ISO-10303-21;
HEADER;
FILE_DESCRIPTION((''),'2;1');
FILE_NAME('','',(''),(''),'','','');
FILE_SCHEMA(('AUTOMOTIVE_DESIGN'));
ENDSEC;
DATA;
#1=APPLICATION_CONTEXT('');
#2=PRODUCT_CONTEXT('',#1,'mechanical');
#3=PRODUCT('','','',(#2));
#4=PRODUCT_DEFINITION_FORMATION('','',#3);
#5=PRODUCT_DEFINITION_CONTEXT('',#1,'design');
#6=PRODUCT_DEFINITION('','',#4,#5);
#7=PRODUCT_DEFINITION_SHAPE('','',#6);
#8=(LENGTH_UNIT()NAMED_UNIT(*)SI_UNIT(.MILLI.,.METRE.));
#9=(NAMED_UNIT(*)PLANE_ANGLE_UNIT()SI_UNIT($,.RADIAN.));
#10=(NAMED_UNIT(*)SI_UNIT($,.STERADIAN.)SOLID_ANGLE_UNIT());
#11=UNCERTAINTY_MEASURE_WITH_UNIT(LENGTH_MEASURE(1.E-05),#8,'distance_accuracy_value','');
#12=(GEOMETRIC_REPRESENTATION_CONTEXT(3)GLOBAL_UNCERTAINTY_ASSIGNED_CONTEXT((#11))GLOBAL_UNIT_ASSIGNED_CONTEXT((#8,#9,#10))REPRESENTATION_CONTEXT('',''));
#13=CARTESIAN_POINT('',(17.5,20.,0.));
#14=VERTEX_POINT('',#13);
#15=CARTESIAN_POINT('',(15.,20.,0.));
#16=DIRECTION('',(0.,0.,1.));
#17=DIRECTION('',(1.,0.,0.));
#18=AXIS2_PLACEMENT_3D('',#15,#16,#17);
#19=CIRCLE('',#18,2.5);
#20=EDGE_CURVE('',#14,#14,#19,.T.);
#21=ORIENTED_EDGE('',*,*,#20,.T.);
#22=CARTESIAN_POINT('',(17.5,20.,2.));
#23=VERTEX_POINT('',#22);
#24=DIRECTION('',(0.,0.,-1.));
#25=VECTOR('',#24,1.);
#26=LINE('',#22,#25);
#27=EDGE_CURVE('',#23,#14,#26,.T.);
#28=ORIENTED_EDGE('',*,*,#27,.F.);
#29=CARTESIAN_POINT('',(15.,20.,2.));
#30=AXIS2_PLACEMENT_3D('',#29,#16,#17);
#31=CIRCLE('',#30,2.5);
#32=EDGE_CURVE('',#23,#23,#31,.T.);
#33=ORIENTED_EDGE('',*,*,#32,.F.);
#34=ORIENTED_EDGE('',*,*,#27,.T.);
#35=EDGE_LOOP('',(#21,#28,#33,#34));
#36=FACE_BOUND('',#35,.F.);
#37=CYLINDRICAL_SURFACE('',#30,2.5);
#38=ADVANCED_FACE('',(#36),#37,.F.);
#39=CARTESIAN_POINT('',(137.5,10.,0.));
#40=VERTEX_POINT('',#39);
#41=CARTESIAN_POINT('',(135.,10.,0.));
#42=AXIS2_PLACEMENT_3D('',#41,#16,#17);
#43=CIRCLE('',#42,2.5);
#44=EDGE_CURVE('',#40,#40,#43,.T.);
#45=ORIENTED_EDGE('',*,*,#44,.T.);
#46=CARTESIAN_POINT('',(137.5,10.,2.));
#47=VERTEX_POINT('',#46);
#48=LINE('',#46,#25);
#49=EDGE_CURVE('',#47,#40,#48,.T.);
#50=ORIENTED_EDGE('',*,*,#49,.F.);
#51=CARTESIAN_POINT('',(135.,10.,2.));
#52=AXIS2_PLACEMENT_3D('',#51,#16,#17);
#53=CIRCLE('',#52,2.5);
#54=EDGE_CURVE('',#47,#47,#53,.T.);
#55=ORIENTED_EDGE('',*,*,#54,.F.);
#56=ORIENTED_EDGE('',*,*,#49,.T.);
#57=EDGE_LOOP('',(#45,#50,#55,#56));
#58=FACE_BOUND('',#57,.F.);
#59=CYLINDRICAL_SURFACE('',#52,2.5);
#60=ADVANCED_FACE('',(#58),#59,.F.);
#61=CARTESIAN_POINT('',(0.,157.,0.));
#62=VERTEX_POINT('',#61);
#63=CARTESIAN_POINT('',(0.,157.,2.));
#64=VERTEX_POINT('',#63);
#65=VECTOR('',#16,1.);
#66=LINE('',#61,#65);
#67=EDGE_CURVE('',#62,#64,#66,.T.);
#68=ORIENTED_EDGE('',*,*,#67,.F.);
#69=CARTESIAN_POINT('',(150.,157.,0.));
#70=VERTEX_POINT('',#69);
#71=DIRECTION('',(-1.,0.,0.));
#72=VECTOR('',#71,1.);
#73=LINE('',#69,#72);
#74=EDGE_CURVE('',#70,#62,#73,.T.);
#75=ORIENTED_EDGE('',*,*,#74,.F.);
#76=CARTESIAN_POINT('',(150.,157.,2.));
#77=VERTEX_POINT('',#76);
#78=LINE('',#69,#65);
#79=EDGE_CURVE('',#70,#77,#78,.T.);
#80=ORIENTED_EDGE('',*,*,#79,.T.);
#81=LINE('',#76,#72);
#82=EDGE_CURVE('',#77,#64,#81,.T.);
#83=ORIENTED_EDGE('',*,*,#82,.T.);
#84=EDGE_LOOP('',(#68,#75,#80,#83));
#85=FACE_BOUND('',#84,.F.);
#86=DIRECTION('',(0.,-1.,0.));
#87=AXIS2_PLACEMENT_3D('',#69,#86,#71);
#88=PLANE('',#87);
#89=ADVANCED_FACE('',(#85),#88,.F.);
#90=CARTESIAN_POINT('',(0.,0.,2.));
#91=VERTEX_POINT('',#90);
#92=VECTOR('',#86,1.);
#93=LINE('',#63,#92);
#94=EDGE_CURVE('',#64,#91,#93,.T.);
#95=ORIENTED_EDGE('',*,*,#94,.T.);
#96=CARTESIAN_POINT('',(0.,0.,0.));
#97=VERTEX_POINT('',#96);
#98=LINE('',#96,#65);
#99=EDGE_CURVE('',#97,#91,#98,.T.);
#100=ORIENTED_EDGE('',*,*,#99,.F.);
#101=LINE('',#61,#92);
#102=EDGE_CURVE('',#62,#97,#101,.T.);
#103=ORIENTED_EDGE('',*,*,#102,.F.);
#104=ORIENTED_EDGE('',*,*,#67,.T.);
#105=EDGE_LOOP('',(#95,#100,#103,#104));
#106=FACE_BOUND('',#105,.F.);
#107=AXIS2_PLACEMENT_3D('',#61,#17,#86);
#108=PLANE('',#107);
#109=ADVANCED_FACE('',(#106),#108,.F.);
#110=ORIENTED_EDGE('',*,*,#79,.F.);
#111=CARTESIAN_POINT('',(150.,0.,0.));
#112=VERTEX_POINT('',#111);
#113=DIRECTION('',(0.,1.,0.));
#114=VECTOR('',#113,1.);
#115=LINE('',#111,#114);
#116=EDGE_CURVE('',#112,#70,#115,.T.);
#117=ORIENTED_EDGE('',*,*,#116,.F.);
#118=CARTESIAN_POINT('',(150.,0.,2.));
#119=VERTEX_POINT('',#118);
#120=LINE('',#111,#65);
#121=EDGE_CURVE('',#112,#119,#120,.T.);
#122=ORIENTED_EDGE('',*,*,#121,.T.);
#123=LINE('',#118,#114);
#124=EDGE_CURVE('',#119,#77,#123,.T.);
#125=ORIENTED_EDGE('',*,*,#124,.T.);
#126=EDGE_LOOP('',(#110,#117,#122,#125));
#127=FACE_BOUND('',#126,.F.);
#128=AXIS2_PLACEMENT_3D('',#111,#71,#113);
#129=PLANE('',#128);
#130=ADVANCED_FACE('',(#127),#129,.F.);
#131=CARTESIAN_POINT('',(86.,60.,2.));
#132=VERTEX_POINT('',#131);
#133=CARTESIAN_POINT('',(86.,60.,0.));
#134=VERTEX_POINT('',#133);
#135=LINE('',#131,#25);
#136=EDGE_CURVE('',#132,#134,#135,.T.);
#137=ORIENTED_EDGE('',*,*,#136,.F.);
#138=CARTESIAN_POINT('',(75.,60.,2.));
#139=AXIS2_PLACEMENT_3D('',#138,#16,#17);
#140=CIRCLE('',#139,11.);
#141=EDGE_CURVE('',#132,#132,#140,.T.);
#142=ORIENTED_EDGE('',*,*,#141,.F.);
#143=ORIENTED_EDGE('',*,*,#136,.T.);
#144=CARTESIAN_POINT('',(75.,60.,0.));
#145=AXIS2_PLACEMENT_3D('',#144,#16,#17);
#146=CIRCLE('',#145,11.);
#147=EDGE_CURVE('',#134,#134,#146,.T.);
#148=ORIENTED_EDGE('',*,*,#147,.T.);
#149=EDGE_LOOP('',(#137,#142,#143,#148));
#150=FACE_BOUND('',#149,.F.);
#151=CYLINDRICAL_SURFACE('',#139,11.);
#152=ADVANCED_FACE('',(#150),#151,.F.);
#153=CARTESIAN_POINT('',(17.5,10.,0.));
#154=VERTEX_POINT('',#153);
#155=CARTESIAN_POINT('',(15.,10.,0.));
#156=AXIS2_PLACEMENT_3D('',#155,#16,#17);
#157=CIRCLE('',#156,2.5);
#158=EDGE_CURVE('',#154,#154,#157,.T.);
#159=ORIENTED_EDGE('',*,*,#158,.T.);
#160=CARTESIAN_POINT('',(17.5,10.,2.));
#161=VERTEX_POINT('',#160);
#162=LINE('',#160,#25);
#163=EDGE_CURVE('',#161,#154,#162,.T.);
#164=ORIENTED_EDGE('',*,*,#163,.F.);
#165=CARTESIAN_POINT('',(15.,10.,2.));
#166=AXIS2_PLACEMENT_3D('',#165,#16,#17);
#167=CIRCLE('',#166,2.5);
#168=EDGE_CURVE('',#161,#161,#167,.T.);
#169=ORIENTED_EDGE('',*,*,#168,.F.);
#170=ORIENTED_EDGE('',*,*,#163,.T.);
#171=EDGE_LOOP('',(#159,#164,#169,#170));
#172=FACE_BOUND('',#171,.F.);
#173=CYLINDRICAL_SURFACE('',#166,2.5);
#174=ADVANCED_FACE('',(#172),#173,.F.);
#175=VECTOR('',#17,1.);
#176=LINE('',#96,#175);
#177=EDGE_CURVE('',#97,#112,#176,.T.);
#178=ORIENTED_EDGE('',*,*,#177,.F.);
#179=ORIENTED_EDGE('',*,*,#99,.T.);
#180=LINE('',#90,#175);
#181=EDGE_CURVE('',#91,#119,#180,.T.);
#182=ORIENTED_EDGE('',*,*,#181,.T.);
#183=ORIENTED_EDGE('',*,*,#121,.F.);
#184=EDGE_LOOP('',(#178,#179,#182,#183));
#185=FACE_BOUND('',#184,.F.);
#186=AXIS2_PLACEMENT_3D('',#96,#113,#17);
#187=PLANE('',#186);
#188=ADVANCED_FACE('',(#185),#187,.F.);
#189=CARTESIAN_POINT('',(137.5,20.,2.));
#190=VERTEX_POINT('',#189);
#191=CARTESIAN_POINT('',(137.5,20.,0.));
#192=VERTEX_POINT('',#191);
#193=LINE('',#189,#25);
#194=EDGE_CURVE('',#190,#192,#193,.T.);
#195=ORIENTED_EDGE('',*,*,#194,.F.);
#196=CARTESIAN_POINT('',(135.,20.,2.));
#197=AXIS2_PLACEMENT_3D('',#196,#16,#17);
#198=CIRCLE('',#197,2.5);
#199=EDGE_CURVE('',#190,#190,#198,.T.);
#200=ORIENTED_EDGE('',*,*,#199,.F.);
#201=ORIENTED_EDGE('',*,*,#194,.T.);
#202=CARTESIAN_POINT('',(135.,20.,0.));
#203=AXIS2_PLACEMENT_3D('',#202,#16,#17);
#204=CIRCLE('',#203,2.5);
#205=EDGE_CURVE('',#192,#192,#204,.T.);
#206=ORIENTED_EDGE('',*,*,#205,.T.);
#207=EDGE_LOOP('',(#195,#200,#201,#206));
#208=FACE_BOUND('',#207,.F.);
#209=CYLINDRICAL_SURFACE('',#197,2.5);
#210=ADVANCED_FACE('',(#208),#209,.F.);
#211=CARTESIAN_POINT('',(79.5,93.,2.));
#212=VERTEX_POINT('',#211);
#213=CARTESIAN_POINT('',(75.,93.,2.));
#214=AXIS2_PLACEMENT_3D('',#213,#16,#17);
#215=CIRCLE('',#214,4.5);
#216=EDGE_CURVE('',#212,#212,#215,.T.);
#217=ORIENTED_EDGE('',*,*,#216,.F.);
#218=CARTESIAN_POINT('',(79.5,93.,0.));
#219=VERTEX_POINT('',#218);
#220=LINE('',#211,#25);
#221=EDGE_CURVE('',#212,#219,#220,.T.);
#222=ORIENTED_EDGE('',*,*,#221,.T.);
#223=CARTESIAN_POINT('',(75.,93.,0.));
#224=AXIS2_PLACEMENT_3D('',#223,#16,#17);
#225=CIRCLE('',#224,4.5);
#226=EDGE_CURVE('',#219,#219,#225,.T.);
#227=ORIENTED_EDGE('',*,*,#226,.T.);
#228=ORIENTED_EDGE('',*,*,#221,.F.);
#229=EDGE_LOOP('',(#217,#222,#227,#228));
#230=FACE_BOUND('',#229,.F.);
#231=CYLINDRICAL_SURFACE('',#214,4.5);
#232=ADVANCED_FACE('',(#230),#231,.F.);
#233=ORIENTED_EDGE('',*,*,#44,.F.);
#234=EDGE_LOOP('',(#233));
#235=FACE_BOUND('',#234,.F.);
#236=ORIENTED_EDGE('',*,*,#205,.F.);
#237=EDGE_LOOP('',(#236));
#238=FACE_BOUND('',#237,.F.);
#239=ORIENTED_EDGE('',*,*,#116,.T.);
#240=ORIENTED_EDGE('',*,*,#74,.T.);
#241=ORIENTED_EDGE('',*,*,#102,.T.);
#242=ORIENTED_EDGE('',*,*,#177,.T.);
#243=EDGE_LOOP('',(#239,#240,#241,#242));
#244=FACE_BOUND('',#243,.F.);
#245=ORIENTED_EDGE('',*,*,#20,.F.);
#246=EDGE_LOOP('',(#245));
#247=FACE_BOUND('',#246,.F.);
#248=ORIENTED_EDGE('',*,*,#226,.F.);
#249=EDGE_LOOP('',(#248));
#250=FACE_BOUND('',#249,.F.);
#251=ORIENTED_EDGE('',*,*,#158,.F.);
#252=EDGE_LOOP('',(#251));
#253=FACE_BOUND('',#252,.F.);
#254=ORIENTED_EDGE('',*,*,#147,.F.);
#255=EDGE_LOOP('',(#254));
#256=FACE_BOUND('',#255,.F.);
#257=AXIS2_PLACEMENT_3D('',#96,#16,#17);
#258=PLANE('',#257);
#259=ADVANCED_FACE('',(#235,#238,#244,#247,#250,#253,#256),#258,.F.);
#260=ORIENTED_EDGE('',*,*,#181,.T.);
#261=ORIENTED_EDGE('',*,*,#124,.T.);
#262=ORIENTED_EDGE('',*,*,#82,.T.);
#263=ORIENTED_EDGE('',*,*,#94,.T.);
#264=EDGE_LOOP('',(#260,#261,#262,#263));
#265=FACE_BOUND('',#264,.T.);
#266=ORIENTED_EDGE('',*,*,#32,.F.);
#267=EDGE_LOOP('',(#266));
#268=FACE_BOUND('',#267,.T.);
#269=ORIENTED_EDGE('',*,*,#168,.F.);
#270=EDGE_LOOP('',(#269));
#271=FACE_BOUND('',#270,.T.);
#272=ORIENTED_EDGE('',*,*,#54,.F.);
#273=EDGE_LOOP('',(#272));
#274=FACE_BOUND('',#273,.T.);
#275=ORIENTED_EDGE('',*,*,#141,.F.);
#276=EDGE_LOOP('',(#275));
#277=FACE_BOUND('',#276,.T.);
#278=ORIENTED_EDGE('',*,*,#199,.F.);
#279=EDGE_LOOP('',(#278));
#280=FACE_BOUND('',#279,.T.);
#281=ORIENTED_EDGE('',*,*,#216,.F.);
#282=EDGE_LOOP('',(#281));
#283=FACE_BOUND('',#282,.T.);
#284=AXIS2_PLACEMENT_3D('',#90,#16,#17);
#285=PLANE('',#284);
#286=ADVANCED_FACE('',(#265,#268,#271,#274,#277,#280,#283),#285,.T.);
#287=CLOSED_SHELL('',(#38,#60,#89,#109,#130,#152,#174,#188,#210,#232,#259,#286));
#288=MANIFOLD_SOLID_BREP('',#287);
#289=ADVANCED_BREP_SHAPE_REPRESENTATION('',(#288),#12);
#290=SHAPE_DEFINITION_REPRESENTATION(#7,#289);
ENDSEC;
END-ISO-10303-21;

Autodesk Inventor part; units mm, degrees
ref_plane "YZ Plane" through (0, 0, 0) normal (1, 0, 0) x (0, 1, 0)
ref_plane "XZ Plane" through (0, 0, 0) normal (0, 1, 0) x (-1, 0, 0)
ref_plane "XY Plane" through (0, 0, 0) normal (0, 0, 1) x (1, 0, 0)
sketch "Sketch1" plane through (0, 0, 0) normal (0, 0, 1) x (1, 0, 0)
  line L0 (0, 0) -> (150, 0)
  line L1 (150, 0) -> (150, 157)
  line L2 (150, 157) -> (0, 157)
  line L3 (0, 157) -> (0, 0)
  dimension "d0" = 157
  dimension "d1" = 150
extrude "Plate1" add sketch "Sketch1" along normal blind 2
sketch "Sketch2" plane through (0, 0, 2) normal (0, 0, 1) x (1, 0, 0)
  line L0 (0, 0) -> (0, 157) projected
  line L1 (0, 157) -> (150, 157) projected
  circle A0 centre (75, 60) radius 11
  line L2 (150, 0) -> (0, 0) projected
  line L3 (150, 157) -> (150, 0) projected
  circle A1 centre (15, 10) radius 2.5
  circle A2 centre (15, 20) radius 2.5
  line L4 (75, 0) -> (75, 157) construction
  circle A3 centre (135, 10) radius 2.5
  circle A4 centre (135, 20) radius 2.5
  circle A5 centre (75, 93) radius 4.5
  point P0 (0, 78.5)
  dimension "d3" = 22
  dimension "d6" = 5
  dimension "d7" = 5
  dimension "d8" = 15
  dimension "d9" = 10
  dimension "d10" = 10
  dimension "d11" = 9
  dimension "d12" = 33
  dimension "d13" = 60
extrude "Extrusion1" cut sketch "Sketch2" against normal through all contours A0 | A1 | A2 | A3 | A4 | A5
equation "\"BendRadius\" = Thickness"
equation "\"BendReliefWidth\" = Thickness"
equation "\"BendReliefDepth\" = 0.5 * Thickness"
equation "\"CornerReliefSize\" = 4 * Thickness"
equation "\"MinimumRemnant\" = 2 * Thickness"
equation "\"TransitionRadius\" = BendRadius"
equation "\"JacobiRadiusSize\" = BendRadius"
equation "\"GapSize\" = Thickness"
equation "\"d2\" = BendRadius"
equation "\"Thickness\" = 2"
properties part number "SensorPlatta"
